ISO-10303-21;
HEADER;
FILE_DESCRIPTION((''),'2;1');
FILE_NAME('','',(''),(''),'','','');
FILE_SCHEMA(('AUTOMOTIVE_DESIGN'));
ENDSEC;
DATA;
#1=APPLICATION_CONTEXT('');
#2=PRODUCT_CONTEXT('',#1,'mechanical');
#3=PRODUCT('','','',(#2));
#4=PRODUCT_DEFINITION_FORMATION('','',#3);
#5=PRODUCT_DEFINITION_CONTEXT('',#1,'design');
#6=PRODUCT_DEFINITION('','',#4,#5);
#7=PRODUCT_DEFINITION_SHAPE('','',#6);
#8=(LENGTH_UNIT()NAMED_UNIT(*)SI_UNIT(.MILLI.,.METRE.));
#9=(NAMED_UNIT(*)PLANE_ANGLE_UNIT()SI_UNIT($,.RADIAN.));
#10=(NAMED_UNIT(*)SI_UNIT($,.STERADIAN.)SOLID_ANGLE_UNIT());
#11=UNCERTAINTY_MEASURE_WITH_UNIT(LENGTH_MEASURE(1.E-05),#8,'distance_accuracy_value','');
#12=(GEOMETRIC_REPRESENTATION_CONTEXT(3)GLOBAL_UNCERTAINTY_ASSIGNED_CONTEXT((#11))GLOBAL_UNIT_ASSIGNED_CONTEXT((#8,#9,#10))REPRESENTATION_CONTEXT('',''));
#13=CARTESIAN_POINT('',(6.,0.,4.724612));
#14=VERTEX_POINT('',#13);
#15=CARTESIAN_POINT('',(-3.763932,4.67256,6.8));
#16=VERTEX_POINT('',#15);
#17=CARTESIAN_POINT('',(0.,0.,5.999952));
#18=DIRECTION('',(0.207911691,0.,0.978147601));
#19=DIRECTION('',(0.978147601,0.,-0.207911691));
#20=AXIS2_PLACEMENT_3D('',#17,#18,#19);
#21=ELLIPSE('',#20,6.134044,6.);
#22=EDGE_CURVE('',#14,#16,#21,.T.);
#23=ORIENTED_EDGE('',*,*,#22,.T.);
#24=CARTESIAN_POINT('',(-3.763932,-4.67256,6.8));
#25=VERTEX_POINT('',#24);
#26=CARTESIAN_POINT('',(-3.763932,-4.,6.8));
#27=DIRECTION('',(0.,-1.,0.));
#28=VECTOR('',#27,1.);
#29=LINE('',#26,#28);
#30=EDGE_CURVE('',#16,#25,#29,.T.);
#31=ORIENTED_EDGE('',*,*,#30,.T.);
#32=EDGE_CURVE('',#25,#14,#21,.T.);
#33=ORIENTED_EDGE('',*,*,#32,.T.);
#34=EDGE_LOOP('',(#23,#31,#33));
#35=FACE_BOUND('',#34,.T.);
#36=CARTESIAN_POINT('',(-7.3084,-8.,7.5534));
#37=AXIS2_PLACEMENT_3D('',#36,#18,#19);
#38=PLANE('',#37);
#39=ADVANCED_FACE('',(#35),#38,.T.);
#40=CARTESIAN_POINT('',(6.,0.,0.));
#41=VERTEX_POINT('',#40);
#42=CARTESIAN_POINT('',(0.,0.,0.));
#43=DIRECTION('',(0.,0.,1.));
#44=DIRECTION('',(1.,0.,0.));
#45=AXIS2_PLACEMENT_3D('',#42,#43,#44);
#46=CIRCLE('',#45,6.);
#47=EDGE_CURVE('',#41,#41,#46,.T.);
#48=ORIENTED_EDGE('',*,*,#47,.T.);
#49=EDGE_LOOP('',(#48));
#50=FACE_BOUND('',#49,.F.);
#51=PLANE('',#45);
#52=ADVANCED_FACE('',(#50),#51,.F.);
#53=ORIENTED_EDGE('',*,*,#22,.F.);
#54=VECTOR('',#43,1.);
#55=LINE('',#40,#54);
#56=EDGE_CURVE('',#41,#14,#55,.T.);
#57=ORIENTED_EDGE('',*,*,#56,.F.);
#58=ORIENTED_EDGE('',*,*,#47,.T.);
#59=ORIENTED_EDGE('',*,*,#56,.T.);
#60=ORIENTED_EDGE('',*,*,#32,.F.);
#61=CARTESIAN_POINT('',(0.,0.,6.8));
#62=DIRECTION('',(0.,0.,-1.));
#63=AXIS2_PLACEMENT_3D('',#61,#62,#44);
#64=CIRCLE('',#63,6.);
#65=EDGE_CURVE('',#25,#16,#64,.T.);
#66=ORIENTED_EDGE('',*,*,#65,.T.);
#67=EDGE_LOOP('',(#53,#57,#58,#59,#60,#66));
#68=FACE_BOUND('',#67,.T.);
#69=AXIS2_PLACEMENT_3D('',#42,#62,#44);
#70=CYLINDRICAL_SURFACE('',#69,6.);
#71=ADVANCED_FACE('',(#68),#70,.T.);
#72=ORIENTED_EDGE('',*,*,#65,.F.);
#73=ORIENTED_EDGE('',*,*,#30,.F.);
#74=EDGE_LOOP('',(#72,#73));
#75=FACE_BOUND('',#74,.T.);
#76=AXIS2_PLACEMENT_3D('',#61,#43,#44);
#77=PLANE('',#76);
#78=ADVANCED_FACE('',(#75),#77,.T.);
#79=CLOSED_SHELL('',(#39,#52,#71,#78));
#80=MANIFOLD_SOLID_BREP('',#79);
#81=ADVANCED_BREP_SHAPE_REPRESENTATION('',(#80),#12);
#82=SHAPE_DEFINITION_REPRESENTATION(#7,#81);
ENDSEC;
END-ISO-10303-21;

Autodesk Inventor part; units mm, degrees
ref_plane "YZ Plane" through (0, 0, 0) normal (1, 0, 0) x (0, 1, 0)
sketch "Sketch1" plane through (0, 0, 0) normal (0, 0, 1) x (1, 0, 0)
  circle A0 centre (0, 0) radius 6 projected
  point P0 (0, 0)
ref_plane "Work Plane1" through (-7.3084, -8, 8.5534) normal (0.2079117, 0, 0.9781476) x (0.9781476, 0, -0.2079117)
ref_plane "Work Plane2" through (-7.3084, -8, 7.5534) normal (0.2079117, 0, 0.9781476) x (0.9781476, 0, -0.2079117)
extrude "Extrusion1" add sketch "Sketch1" along normal up to surface surface through (-7.3084, -8, 7.5534) normal (0.2079117, 0, 0.9781476)
ref_plane "Work Plane3" through (0, 0, 6.8) normal (0, 0, 1) x (1, 0, 0)
sketch "Sketch2" plane through (0, 0, 6.8) normal (0, 0, 1) x (1, 0, 0)
  circle A0 centre (0, 0) radius 10
  dimension "d2" = 20
extrude "Extrusion2" cut sketch "Sketch2" along normal through all
fillet_without_effect "Fillet1"
properties part number "tungsten" material "Steel, Mild"
